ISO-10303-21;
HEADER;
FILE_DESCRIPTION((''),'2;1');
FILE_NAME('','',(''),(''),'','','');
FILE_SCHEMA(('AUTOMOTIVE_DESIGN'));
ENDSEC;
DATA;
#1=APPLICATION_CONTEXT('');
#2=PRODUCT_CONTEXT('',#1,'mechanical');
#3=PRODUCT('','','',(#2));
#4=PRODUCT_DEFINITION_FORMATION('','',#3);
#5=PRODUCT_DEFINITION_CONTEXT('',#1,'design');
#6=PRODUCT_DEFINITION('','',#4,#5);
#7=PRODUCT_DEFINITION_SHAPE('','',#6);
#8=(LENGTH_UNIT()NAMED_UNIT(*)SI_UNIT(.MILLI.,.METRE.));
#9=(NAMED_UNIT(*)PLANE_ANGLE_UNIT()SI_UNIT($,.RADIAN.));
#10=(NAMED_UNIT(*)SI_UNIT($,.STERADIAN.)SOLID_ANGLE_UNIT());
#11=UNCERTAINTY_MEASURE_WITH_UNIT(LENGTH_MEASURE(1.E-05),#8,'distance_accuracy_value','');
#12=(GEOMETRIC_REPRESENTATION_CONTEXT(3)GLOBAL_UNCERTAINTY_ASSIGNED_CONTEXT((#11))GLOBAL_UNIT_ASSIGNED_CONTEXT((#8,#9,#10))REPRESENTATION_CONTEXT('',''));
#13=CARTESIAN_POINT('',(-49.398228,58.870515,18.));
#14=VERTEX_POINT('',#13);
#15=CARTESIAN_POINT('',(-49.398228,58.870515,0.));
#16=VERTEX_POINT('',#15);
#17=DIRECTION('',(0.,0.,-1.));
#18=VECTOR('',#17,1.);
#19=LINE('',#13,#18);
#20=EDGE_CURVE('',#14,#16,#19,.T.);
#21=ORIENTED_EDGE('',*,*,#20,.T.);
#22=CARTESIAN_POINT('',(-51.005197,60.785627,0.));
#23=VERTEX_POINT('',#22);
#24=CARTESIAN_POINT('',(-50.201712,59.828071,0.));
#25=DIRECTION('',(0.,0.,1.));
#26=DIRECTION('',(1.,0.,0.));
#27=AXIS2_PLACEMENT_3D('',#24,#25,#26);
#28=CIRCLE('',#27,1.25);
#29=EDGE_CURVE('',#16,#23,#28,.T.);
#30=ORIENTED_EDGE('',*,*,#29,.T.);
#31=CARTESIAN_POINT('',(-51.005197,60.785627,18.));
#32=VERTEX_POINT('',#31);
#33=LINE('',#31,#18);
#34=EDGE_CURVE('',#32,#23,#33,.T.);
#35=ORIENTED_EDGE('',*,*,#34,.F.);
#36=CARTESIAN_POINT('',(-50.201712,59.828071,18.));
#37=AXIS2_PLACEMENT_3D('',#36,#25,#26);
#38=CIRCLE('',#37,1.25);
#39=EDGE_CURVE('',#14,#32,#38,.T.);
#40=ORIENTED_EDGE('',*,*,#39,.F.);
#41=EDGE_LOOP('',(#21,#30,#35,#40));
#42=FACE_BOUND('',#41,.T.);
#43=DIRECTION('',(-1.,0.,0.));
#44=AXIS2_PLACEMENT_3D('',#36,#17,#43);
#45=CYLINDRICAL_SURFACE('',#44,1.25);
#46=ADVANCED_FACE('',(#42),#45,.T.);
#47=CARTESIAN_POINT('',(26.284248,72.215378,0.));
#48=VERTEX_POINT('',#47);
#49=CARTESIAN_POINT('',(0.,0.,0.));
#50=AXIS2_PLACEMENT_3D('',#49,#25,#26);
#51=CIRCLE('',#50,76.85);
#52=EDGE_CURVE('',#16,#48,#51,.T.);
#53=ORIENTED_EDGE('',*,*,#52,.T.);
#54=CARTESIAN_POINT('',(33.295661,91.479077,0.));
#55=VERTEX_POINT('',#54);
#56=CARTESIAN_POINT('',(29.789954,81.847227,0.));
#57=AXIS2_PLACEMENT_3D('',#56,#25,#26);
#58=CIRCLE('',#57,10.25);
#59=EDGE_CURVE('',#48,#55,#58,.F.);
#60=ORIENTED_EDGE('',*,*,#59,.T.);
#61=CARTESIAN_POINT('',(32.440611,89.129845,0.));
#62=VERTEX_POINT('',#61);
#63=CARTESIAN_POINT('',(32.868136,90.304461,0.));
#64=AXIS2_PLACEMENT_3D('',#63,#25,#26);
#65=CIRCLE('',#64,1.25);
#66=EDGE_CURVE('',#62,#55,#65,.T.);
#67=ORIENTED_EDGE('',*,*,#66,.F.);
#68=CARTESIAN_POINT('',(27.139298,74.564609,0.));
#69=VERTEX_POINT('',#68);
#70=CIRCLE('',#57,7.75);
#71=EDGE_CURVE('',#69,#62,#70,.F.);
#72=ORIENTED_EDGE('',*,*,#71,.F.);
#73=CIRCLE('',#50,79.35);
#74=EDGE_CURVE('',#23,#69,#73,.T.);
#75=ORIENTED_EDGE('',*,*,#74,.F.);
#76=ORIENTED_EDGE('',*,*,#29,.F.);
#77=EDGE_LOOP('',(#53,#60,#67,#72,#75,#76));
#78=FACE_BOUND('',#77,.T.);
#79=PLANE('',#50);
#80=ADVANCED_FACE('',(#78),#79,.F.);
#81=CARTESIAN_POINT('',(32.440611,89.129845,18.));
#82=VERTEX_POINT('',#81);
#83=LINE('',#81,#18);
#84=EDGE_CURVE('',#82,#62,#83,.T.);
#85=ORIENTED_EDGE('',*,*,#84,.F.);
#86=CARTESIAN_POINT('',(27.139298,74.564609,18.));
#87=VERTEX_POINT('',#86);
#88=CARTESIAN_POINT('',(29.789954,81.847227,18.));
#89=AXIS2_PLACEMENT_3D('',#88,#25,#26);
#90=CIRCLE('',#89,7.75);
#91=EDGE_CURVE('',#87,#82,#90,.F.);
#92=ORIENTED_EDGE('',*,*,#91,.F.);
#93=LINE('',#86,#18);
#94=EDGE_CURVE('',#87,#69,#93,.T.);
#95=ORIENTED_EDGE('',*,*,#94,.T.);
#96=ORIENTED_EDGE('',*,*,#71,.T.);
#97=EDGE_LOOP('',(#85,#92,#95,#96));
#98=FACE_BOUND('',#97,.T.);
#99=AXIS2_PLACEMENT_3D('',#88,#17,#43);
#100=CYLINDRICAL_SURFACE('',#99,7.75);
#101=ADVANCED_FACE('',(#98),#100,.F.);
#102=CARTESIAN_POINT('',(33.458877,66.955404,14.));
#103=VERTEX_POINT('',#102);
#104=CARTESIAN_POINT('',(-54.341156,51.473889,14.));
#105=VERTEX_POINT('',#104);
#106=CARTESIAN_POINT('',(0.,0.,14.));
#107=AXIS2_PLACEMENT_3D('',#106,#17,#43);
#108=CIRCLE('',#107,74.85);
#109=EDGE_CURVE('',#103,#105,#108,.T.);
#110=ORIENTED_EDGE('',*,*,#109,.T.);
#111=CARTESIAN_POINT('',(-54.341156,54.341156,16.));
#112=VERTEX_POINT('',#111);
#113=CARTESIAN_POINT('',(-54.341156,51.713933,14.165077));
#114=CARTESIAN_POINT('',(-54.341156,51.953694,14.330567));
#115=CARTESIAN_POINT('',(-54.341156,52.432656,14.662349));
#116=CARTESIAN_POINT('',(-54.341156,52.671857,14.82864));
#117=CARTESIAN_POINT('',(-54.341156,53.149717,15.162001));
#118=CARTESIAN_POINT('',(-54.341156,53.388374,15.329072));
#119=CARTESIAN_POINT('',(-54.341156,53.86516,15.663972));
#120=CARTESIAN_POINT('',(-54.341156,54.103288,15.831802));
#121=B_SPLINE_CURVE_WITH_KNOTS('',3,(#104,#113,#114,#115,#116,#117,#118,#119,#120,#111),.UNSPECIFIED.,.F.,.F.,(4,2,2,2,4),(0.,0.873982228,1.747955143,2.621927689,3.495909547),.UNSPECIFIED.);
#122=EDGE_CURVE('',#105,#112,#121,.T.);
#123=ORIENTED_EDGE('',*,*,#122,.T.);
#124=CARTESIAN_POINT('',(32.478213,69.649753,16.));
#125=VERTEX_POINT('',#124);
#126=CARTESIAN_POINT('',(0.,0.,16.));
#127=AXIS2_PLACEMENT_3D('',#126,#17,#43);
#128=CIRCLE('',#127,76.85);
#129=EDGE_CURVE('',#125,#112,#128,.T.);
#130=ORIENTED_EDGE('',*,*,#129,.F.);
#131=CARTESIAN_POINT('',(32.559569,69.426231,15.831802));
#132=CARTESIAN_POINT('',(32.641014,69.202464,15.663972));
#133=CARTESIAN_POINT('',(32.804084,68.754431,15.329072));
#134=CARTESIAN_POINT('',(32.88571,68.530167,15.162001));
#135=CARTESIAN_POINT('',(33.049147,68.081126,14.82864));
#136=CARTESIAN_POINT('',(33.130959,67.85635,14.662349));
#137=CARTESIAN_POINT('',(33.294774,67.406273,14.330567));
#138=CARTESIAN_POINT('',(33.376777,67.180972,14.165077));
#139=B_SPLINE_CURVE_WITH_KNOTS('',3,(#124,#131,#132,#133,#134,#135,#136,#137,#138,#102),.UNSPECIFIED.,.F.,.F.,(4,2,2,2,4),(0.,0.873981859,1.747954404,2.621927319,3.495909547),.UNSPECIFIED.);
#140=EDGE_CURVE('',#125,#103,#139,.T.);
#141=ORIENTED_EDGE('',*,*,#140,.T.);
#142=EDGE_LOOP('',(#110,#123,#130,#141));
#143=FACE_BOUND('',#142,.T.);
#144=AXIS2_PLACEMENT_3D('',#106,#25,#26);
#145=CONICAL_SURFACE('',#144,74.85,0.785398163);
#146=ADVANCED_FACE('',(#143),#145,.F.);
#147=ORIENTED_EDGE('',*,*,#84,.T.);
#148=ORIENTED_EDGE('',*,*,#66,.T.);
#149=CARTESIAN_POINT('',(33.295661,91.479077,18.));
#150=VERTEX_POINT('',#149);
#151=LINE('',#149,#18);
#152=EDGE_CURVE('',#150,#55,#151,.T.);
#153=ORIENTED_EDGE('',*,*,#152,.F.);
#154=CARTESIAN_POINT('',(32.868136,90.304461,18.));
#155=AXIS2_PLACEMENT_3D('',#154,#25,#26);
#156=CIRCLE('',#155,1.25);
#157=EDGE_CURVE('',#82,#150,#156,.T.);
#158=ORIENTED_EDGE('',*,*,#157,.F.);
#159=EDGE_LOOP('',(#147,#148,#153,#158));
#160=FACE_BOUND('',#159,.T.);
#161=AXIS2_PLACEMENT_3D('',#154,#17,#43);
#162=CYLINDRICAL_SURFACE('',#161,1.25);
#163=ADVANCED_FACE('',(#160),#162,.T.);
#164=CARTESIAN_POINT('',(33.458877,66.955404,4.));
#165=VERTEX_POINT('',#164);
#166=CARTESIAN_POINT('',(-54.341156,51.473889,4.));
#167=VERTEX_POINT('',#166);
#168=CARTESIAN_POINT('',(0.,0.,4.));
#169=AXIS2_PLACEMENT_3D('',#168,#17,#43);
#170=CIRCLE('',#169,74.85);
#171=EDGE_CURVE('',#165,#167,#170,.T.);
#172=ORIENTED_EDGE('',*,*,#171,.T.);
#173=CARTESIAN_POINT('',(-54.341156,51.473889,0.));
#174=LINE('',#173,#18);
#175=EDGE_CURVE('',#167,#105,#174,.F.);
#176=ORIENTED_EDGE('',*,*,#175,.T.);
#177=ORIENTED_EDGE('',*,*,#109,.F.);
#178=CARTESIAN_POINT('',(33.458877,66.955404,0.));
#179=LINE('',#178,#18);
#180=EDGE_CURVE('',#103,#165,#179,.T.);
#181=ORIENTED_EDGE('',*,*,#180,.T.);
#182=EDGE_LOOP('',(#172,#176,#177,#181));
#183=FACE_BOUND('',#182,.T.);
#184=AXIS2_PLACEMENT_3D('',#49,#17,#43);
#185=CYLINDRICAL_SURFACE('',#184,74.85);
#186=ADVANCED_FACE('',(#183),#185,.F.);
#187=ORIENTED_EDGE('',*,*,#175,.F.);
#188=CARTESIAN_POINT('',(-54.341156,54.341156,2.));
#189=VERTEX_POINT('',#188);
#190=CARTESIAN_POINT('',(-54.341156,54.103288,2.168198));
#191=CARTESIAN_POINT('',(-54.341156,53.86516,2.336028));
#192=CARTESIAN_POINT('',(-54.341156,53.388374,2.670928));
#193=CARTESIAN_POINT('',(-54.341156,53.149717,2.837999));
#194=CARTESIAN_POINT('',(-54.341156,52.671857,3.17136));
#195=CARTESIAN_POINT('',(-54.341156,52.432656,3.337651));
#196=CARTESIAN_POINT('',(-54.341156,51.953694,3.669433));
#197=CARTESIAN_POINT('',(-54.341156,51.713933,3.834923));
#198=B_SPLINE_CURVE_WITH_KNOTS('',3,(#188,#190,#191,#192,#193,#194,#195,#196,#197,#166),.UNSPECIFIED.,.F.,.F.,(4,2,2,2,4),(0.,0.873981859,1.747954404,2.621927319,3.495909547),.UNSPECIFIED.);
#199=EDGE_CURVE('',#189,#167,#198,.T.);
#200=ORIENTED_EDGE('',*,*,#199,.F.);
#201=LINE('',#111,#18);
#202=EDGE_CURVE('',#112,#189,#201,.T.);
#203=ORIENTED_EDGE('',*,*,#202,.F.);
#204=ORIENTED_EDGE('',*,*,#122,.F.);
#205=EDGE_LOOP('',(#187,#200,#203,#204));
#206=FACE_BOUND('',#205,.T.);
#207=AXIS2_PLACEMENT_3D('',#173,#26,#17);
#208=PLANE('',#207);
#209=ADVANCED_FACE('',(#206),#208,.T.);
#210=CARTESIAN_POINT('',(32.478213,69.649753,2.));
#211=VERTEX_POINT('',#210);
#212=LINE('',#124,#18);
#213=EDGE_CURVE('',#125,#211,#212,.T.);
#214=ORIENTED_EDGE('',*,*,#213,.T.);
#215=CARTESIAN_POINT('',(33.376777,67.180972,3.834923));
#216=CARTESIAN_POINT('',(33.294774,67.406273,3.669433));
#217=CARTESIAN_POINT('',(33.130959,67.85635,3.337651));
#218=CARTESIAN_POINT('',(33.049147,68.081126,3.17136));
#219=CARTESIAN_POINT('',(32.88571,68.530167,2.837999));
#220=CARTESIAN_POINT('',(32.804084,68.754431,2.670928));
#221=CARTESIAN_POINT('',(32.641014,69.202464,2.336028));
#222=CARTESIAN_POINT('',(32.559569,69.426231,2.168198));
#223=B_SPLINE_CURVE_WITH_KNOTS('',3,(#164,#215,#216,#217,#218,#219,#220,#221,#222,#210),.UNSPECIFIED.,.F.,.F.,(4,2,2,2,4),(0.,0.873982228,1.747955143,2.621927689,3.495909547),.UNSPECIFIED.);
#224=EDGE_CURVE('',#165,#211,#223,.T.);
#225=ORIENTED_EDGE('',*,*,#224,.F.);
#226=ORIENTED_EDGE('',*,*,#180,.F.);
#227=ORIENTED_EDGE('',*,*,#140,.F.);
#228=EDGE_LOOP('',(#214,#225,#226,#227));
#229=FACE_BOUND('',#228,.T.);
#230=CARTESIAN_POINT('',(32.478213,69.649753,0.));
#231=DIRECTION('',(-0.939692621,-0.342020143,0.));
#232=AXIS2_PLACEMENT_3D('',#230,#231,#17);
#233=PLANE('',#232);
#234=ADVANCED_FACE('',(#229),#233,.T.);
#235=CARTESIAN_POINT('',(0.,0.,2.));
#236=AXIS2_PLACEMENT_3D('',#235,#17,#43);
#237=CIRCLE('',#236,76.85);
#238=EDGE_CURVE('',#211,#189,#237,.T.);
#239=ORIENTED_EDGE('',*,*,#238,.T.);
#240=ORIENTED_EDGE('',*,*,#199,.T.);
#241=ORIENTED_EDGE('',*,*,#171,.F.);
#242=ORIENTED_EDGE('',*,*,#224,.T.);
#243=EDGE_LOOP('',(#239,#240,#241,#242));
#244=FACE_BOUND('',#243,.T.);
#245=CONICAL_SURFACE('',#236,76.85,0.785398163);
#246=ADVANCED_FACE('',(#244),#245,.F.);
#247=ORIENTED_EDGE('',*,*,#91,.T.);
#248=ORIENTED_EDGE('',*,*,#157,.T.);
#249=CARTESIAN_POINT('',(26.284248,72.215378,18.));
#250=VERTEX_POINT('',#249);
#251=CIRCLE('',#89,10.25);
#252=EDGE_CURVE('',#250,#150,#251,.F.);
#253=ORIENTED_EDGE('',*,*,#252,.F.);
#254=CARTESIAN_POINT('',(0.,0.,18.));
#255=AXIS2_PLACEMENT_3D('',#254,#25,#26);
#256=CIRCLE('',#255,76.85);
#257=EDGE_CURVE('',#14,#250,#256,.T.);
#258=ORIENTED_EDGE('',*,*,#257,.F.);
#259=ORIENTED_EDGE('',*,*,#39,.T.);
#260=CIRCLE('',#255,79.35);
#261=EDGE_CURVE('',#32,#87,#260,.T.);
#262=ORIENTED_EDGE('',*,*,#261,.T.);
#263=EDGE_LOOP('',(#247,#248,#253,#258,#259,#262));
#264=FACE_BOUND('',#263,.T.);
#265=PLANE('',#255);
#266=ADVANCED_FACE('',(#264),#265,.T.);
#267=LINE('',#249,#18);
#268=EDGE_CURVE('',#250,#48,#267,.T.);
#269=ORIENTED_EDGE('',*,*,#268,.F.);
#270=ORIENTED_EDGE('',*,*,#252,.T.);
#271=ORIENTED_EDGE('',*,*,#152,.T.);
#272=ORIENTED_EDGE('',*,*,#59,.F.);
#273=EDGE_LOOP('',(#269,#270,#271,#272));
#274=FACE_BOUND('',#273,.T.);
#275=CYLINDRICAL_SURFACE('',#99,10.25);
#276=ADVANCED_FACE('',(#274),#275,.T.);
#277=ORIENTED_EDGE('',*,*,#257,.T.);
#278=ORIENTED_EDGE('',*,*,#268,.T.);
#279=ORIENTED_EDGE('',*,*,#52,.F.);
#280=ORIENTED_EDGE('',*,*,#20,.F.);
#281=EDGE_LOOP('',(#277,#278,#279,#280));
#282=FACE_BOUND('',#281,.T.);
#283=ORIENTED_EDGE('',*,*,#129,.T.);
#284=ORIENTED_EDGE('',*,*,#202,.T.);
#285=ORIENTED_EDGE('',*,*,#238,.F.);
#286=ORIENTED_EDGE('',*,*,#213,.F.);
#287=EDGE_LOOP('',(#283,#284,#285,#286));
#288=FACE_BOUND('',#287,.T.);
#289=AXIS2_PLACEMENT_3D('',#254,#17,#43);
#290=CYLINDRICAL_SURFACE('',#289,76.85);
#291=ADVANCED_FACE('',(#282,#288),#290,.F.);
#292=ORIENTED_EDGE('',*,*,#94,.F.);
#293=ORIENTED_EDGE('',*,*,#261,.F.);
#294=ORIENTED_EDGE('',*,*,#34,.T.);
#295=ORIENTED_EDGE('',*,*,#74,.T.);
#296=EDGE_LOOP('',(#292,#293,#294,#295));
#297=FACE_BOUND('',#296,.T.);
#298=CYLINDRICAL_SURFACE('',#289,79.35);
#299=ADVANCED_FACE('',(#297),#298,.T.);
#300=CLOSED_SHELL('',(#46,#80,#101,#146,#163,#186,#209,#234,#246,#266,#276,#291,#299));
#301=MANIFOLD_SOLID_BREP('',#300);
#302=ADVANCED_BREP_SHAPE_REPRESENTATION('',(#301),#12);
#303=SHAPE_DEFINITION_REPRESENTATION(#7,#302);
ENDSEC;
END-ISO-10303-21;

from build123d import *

# Parameters (mm, degrees)
BOSS_EXTRUDE1_DEPTH      = 18
REVOLVE1_ANGLE           = 155
REVOLVE1_OTHER_WAY_ANGLE = 135
CHAMFER1_SIZE            = 2


with BuildPart() as part:
    # Sketch1 → Boss-Extrude1 (new body)
    with BuildSketch(Plane.XY):
        with BuildLine():
            ThreePointArc((26.284248015, 72.215377907), (13.344862454, -75.682475819), (-49.398227804, 58.870515454))
            ThreePointArc((-49.398227804, 58.870515454), (-48.984779038, 59.542460442), (-49.056117508, 60.328183531))
            ThreePointArc((-49.056117508, 60.328183531), (-49.916101751, 61.045004286), (-51.005196829, 60.785626561))
            ThreePointArc((-51.005196829, 60.785626561), (13.778982898, -78.144495202), (27.139298373, 74.564609459))
            ThreePointArc((27.139298373, 74.564609459), (22.507336673, 84.497883381), (32.440610594, 89.129845082))
            ThreePointArc((32.440610594, 89.129845082), (32.488426827, 89.113527981), (32.536863386, 89.099156495))
            ThreePointArc((32.536863386, 89.099156495), (34.05906865, 89.924751911), (33.295660953, 91.479076634))
            ThreePointArc((33.295660953, 91.479076634), (20.158105121, 85.35293374), (26.284248015, 72.215377907))
        make_face()
    extrude(amount=BOSS_EXTRUDE1_DEPTH)

    # Sketch2 → Revolve1 (revolve)
    with BuildSketch(Plane(origin=(0, 0, 0), x_dir=(0, 0, -1), z_dir=(1, 0, 0))):
        Polygon((-14, -74.85), (-16, -76.85), (-2, -76.85), (-4, -74.85), align=None)
    revolve(axis=Axis((0, 0, 0), (0, 0, 1)), revolution_arc=REVOLVE1_ANGLE)

    # Sketch2 → Revolve1 other way (revolve)
    with BuildSketch(Plane(origin=(0, 0, 0), x_dir=(0, 0, -1), z_dir=(1, 0, 0))):
        Polygon((-14, -74.85), (-16, -76.85), (-2, -76.85), (-4, -74.85), align=None)
    revolve(axis=Axis((0, 0, 0), (0, 0, -1)), revolution_arc=REVOLVE1_OTHER_WAY_ANGLE)

    # Chamfer1
    # the kernel refuses this chamfer: 2 mm, written as the material it takes off along each edge
    with BuildSketch(Plane(origin=(31.632976891, 67.83713786, -1.214315162), x_dir=(0.9005003860175051, -0.4348552112856927, 0), z_dir=(0, 0, 1))) as chamfer1_piece_1_section:
        with BuildLine():
            Line((2.027650031, 0), (-CHAMFER1_SIZE * 0.0135447563861, CHAMFER1_SIZE * 0.99990826558))
            Line((-CHAMFER1_SIZE * 0.0135447563861, CHAMFER1_SIZE * 0.99990826558), (0, 0))
            ThreePointArc((0, 0), (1.042503113, 0.006860827), (2.027650031, 0))
        make_face()
    chamfer1_piece_1 = extrude(amount=20.428630325, mode=Mode.PRIVATE)
    chamfer1_piece_1 = chamfer1_piece_1 & Plane(origin=(0, 0, -1.214315162), x_dir=(0.3420201433256637, 0.9396926207859103, 0), z_dir=(0, 0, -1)) * Cylinder(76.85, 49, mode=Mode.PRIVATE)
    add(chamfer1_piece_1, mode=Mode.SUBTRACT)
    with BuildSketch(Plane(origin=(-52.926942572, 52.926942572, -1.214315162), x_dir=(-0.6974643260656699, -0.7166195042459848, 0), z_dir=(0, 0, 1))) as chamfer1_piece_2_section:
        with BuildLine():
            Line((2.027650031, 0), (-CHAMFER1_SIZE * 0.0135447563861, -CHAMFER1_SIZE * 0.99990826558))
            Line((-CHAMFER1_SIZE * 0.0135447563861, -CHAMFER1_SIZE * 0.99990826558), (0, 0))
            ThreePointArc((0, 0), (1.042503113, -0.006860827), (2.027650031, 0))
        make_face()
    chamfer1_piece_2 = extrude(amount=20.428630325, mode=Mode.PRIVATE)
    chamfer1_piece_2 = chamfer1_piece_2 & Plane(origin=(0, 0, -1.214315162), x_dir=(0.3420201433256637, 0.9396926207859103, 0), z_dir=(0, 0, -1)) * Cylinder(76.85, 49, mode=Mode.PRIVATE)
    add(chamfer1_piece_2, mode=Mode.SUBTRACT)


solid = part.part
